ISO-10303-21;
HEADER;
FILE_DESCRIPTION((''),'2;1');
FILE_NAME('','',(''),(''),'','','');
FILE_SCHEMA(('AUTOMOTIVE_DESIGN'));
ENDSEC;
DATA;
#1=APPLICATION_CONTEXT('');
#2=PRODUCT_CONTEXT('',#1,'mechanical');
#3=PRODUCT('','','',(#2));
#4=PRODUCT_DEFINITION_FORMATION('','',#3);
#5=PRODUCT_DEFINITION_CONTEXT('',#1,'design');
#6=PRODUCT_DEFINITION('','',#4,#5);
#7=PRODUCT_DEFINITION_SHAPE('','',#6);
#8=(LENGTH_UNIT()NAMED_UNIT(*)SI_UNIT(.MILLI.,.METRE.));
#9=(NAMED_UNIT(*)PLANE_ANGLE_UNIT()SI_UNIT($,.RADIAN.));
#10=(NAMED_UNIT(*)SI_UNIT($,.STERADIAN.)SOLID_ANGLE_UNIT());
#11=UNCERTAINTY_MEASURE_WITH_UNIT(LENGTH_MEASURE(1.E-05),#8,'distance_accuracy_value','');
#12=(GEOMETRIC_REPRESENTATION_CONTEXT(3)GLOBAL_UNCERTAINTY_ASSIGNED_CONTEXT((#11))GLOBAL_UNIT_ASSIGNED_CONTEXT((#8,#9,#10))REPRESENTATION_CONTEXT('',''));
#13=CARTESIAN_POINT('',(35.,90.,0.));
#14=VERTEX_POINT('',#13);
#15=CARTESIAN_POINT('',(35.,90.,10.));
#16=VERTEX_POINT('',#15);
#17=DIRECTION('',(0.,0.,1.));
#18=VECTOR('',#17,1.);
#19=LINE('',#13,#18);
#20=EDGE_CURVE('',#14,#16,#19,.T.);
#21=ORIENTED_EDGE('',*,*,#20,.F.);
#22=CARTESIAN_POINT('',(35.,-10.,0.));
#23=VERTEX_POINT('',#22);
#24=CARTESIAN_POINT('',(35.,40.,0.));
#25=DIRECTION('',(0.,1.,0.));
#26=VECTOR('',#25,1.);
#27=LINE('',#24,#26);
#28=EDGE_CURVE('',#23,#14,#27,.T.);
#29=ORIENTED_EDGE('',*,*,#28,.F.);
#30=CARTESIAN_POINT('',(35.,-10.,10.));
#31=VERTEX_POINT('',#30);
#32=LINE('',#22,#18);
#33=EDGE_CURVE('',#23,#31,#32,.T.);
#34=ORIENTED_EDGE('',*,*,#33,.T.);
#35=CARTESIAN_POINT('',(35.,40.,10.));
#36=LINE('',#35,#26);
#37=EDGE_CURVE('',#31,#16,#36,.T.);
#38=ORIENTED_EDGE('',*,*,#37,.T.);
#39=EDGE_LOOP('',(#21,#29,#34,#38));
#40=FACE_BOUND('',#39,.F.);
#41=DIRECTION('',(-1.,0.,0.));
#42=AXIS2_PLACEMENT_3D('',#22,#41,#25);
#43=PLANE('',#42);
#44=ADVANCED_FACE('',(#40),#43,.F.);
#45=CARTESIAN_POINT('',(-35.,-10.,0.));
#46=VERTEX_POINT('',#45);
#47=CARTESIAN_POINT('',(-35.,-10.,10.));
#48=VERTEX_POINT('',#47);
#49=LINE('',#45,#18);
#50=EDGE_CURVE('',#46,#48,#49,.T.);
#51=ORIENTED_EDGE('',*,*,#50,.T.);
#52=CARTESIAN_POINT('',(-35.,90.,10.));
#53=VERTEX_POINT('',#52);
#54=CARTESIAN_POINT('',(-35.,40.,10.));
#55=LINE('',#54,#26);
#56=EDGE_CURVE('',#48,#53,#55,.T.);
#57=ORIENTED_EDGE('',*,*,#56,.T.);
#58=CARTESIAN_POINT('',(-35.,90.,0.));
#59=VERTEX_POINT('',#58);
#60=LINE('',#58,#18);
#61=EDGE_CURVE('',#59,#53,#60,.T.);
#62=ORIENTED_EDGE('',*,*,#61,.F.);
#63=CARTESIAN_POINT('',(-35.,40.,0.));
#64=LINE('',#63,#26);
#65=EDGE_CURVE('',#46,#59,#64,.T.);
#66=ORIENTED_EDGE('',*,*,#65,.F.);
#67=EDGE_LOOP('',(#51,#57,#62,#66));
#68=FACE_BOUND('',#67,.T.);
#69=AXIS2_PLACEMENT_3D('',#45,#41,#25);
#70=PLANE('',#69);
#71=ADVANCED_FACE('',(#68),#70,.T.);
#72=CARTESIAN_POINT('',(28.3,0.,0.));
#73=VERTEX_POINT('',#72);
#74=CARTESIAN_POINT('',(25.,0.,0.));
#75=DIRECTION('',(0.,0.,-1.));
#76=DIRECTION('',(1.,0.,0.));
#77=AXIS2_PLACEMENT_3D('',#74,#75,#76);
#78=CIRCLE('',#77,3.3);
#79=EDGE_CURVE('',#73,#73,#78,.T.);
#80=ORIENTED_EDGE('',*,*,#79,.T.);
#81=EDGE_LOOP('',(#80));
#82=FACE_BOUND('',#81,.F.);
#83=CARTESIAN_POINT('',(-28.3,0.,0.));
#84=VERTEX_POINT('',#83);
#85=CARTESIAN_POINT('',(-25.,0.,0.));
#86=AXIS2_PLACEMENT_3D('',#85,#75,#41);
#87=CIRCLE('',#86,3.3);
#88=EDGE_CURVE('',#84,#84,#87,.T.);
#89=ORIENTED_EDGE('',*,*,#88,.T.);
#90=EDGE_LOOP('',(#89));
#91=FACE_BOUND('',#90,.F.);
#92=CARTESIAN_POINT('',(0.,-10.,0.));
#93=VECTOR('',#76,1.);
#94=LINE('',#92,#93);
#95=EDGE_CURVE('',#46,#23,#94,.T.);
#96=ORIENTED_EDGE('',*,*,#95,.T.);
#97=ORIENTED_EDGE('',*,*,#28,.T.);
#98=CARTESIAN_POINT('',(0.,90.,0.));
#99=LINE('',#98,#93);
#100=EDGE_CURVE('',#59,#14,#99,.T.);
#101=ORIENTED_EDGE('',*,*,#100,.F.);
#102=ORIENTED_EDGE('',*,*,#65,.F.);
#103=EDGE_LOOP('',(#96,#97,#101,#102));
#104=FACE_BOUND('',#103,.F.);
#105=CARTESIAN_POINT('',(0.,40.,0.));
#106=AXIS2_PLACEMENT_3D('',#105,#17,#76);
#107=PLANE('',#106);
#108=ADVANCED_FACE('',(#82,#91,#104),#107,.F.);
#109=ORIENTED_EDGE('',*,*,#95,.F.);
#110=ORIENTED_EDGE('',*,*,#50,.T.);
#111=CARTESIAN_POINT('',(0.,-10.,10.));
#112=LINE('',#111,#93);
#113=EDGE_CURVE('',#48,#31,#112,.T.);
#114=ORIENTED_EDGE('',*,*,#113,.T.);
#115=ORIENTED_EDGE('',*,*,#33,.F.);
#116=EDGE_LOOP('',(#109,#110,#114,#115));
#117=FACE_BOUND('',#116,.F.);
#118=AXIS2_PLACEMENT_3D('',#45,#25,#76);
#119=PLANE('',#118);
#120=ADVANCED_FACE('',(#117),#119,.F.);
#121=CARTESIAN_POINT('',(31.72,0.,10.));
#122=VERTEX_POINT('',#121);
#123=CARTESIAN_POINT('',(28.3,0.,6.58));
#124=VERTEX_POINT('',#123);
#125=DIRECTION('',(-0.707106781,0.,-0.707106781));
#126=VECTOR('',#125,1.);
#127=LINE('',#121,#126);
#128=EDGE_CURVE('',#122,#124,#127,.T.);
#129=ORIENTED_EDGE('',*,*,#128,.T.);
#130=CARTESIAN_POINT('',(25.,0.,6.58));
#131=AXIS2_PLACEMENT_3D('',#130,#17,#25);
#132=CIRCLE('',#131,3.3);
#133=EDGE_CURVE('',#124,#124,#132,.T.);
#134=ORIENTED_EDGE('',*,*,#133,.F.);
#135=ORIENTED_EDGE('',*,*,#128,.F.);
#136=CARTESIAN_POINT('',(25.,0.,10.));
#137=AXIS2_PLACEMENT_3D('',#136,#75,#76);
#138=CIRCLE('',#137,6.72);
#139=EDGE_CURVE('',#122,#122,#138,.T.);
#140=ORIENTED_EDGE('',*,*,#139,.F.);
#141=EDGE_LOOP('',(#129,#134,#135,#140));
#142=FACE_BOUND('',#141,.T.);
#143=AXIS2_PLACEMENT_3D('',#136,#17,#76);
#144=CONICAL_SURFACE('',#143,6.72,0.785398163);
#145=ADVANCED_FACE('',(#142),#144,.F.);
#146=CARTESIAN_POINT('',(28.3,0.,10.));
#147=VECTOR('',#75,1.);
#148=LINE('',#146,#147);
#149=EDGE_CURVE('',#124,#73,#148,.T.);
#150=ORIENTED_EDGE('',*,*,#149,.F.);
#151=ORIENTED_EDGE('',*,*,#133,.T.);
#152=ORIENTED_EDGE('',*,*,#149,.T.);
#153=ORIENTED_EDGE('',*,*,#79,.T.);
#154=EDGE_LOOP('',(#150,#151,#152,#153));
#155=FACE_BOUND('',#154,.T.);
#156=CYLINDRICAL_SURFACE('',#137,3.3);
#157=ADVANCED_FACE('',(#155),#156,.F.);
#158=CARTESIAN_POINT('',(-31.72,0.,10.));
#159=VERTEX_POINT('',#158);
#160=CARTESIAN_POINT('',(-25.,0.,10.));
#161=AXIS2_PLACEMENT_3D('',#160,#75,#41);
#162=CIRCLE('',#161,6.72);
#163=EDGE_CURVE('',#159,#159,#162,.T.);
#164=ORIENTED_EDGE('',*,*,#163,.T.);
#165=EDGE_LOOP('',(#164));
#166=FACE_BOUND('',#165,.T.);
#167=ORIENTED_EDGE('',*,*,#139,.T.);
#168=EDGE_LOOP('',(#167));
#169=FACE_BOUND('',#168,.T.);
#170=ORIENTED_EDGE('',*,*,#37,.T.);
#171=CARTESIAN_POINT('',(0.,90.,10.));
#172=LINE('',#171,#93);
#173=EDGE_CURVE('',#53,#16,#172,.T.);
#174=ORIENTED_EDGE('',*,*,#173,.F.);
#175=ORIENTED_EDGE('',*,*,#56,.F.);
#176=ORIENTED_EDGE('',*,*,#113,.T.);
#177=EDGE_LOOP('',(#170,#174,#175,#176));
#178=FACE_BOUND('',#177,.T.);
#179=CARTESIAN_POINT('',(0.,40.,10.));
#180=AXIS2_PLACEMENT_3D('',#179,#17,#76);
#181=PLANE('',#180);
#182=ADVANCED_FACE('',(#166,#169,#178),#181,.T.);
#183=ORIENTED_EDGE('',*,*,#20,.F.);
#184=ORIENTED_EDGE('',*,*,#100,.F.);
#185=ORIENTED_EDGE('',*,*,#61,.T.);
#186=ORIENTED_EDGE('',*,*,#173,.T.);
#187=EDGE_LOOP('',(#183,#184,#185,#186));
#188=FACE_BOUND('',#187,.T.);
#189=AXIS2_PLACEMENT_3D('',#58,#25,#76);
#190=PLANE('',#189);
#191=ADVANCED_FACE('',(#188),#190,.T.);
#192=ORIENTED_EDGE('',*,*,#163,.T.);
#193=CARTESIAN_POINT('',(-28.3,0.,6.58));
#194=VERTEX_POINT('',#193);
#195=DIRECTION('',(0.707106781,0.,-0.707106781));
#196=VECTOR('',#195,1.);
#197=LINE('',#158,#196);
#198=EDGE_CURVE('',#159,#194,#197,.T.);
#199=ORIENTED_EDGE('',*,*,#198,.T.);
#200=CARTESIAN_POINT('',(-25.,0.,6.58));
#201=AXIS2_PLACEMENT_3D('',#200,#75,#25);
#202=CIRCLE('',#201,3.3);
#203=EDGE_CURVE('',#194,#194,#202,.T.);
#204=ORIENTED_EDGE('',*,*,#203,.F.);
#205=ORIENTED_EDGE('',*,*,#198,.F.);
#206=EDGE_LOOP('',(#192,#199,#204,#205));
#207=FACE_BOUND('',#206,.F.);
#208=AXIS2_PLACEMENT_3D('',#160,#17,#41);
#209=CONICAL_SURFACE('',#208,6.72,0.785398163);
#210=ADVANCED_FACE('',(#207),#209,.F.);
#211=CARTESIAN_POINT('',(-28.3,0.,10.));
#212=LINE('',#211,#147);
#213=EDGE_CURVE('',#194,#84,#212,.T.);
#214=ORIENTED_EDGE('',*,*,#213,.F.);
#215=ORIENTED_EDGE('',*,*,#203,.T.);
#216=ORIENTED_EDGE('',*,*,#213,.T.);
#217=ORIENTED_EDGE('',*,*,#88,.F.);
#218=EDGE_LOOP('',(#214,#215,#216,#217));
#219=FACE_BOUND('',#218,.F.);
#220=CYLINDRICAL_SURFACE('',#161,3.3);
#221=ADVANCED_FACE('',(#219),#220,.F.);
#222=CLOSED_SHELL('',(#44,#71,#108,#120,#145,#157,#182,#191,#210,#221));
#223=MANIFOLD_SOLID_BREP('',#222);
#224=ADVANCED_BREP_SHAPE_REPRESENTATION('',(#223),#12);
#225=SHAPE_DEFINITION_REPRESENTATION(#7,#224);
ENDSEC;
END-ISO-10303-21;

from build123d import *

# Parameters (mm, degrees)
F0_W           = 70
F0_H           = 100
F1_DEPTH       = 10
F3_D           = 6.6
F3_CSINK_D     = 13.44
F3_CSINK_ANGLE = 90


# Not quite as in the source:
# - a pattern or mirror of a feature is missing from the dataset's text; its kind, count and spacing are read off the source's solid


with BuildPart() as f1:
    # F0 (on Top) → F1 (new body)
    with BuildSketch(Plane.XY):
        with Locations((0, 40)):
            Rectangle(F0_W, F0_H)
    extrude(amount=F1_DEPTH)

    # F3 (through all)
    with Locations(Plane.XY.offset(10)):
        with Locations((-25, 0)):
            f3 = CounterSinkHole(F3_D / 2, F3_CSINK_D / 2, counter_sink_angle=F3_CSINK_ANGLE)

    # F3_copies: F3 across plane
    add(f3.mirror(Plane(origin=(0, 0, 0), x_dir=(0, 0, 1), z_dir=(1, 0, 0))), mode=Mode.SUBTRACT)


solid = f1.part
